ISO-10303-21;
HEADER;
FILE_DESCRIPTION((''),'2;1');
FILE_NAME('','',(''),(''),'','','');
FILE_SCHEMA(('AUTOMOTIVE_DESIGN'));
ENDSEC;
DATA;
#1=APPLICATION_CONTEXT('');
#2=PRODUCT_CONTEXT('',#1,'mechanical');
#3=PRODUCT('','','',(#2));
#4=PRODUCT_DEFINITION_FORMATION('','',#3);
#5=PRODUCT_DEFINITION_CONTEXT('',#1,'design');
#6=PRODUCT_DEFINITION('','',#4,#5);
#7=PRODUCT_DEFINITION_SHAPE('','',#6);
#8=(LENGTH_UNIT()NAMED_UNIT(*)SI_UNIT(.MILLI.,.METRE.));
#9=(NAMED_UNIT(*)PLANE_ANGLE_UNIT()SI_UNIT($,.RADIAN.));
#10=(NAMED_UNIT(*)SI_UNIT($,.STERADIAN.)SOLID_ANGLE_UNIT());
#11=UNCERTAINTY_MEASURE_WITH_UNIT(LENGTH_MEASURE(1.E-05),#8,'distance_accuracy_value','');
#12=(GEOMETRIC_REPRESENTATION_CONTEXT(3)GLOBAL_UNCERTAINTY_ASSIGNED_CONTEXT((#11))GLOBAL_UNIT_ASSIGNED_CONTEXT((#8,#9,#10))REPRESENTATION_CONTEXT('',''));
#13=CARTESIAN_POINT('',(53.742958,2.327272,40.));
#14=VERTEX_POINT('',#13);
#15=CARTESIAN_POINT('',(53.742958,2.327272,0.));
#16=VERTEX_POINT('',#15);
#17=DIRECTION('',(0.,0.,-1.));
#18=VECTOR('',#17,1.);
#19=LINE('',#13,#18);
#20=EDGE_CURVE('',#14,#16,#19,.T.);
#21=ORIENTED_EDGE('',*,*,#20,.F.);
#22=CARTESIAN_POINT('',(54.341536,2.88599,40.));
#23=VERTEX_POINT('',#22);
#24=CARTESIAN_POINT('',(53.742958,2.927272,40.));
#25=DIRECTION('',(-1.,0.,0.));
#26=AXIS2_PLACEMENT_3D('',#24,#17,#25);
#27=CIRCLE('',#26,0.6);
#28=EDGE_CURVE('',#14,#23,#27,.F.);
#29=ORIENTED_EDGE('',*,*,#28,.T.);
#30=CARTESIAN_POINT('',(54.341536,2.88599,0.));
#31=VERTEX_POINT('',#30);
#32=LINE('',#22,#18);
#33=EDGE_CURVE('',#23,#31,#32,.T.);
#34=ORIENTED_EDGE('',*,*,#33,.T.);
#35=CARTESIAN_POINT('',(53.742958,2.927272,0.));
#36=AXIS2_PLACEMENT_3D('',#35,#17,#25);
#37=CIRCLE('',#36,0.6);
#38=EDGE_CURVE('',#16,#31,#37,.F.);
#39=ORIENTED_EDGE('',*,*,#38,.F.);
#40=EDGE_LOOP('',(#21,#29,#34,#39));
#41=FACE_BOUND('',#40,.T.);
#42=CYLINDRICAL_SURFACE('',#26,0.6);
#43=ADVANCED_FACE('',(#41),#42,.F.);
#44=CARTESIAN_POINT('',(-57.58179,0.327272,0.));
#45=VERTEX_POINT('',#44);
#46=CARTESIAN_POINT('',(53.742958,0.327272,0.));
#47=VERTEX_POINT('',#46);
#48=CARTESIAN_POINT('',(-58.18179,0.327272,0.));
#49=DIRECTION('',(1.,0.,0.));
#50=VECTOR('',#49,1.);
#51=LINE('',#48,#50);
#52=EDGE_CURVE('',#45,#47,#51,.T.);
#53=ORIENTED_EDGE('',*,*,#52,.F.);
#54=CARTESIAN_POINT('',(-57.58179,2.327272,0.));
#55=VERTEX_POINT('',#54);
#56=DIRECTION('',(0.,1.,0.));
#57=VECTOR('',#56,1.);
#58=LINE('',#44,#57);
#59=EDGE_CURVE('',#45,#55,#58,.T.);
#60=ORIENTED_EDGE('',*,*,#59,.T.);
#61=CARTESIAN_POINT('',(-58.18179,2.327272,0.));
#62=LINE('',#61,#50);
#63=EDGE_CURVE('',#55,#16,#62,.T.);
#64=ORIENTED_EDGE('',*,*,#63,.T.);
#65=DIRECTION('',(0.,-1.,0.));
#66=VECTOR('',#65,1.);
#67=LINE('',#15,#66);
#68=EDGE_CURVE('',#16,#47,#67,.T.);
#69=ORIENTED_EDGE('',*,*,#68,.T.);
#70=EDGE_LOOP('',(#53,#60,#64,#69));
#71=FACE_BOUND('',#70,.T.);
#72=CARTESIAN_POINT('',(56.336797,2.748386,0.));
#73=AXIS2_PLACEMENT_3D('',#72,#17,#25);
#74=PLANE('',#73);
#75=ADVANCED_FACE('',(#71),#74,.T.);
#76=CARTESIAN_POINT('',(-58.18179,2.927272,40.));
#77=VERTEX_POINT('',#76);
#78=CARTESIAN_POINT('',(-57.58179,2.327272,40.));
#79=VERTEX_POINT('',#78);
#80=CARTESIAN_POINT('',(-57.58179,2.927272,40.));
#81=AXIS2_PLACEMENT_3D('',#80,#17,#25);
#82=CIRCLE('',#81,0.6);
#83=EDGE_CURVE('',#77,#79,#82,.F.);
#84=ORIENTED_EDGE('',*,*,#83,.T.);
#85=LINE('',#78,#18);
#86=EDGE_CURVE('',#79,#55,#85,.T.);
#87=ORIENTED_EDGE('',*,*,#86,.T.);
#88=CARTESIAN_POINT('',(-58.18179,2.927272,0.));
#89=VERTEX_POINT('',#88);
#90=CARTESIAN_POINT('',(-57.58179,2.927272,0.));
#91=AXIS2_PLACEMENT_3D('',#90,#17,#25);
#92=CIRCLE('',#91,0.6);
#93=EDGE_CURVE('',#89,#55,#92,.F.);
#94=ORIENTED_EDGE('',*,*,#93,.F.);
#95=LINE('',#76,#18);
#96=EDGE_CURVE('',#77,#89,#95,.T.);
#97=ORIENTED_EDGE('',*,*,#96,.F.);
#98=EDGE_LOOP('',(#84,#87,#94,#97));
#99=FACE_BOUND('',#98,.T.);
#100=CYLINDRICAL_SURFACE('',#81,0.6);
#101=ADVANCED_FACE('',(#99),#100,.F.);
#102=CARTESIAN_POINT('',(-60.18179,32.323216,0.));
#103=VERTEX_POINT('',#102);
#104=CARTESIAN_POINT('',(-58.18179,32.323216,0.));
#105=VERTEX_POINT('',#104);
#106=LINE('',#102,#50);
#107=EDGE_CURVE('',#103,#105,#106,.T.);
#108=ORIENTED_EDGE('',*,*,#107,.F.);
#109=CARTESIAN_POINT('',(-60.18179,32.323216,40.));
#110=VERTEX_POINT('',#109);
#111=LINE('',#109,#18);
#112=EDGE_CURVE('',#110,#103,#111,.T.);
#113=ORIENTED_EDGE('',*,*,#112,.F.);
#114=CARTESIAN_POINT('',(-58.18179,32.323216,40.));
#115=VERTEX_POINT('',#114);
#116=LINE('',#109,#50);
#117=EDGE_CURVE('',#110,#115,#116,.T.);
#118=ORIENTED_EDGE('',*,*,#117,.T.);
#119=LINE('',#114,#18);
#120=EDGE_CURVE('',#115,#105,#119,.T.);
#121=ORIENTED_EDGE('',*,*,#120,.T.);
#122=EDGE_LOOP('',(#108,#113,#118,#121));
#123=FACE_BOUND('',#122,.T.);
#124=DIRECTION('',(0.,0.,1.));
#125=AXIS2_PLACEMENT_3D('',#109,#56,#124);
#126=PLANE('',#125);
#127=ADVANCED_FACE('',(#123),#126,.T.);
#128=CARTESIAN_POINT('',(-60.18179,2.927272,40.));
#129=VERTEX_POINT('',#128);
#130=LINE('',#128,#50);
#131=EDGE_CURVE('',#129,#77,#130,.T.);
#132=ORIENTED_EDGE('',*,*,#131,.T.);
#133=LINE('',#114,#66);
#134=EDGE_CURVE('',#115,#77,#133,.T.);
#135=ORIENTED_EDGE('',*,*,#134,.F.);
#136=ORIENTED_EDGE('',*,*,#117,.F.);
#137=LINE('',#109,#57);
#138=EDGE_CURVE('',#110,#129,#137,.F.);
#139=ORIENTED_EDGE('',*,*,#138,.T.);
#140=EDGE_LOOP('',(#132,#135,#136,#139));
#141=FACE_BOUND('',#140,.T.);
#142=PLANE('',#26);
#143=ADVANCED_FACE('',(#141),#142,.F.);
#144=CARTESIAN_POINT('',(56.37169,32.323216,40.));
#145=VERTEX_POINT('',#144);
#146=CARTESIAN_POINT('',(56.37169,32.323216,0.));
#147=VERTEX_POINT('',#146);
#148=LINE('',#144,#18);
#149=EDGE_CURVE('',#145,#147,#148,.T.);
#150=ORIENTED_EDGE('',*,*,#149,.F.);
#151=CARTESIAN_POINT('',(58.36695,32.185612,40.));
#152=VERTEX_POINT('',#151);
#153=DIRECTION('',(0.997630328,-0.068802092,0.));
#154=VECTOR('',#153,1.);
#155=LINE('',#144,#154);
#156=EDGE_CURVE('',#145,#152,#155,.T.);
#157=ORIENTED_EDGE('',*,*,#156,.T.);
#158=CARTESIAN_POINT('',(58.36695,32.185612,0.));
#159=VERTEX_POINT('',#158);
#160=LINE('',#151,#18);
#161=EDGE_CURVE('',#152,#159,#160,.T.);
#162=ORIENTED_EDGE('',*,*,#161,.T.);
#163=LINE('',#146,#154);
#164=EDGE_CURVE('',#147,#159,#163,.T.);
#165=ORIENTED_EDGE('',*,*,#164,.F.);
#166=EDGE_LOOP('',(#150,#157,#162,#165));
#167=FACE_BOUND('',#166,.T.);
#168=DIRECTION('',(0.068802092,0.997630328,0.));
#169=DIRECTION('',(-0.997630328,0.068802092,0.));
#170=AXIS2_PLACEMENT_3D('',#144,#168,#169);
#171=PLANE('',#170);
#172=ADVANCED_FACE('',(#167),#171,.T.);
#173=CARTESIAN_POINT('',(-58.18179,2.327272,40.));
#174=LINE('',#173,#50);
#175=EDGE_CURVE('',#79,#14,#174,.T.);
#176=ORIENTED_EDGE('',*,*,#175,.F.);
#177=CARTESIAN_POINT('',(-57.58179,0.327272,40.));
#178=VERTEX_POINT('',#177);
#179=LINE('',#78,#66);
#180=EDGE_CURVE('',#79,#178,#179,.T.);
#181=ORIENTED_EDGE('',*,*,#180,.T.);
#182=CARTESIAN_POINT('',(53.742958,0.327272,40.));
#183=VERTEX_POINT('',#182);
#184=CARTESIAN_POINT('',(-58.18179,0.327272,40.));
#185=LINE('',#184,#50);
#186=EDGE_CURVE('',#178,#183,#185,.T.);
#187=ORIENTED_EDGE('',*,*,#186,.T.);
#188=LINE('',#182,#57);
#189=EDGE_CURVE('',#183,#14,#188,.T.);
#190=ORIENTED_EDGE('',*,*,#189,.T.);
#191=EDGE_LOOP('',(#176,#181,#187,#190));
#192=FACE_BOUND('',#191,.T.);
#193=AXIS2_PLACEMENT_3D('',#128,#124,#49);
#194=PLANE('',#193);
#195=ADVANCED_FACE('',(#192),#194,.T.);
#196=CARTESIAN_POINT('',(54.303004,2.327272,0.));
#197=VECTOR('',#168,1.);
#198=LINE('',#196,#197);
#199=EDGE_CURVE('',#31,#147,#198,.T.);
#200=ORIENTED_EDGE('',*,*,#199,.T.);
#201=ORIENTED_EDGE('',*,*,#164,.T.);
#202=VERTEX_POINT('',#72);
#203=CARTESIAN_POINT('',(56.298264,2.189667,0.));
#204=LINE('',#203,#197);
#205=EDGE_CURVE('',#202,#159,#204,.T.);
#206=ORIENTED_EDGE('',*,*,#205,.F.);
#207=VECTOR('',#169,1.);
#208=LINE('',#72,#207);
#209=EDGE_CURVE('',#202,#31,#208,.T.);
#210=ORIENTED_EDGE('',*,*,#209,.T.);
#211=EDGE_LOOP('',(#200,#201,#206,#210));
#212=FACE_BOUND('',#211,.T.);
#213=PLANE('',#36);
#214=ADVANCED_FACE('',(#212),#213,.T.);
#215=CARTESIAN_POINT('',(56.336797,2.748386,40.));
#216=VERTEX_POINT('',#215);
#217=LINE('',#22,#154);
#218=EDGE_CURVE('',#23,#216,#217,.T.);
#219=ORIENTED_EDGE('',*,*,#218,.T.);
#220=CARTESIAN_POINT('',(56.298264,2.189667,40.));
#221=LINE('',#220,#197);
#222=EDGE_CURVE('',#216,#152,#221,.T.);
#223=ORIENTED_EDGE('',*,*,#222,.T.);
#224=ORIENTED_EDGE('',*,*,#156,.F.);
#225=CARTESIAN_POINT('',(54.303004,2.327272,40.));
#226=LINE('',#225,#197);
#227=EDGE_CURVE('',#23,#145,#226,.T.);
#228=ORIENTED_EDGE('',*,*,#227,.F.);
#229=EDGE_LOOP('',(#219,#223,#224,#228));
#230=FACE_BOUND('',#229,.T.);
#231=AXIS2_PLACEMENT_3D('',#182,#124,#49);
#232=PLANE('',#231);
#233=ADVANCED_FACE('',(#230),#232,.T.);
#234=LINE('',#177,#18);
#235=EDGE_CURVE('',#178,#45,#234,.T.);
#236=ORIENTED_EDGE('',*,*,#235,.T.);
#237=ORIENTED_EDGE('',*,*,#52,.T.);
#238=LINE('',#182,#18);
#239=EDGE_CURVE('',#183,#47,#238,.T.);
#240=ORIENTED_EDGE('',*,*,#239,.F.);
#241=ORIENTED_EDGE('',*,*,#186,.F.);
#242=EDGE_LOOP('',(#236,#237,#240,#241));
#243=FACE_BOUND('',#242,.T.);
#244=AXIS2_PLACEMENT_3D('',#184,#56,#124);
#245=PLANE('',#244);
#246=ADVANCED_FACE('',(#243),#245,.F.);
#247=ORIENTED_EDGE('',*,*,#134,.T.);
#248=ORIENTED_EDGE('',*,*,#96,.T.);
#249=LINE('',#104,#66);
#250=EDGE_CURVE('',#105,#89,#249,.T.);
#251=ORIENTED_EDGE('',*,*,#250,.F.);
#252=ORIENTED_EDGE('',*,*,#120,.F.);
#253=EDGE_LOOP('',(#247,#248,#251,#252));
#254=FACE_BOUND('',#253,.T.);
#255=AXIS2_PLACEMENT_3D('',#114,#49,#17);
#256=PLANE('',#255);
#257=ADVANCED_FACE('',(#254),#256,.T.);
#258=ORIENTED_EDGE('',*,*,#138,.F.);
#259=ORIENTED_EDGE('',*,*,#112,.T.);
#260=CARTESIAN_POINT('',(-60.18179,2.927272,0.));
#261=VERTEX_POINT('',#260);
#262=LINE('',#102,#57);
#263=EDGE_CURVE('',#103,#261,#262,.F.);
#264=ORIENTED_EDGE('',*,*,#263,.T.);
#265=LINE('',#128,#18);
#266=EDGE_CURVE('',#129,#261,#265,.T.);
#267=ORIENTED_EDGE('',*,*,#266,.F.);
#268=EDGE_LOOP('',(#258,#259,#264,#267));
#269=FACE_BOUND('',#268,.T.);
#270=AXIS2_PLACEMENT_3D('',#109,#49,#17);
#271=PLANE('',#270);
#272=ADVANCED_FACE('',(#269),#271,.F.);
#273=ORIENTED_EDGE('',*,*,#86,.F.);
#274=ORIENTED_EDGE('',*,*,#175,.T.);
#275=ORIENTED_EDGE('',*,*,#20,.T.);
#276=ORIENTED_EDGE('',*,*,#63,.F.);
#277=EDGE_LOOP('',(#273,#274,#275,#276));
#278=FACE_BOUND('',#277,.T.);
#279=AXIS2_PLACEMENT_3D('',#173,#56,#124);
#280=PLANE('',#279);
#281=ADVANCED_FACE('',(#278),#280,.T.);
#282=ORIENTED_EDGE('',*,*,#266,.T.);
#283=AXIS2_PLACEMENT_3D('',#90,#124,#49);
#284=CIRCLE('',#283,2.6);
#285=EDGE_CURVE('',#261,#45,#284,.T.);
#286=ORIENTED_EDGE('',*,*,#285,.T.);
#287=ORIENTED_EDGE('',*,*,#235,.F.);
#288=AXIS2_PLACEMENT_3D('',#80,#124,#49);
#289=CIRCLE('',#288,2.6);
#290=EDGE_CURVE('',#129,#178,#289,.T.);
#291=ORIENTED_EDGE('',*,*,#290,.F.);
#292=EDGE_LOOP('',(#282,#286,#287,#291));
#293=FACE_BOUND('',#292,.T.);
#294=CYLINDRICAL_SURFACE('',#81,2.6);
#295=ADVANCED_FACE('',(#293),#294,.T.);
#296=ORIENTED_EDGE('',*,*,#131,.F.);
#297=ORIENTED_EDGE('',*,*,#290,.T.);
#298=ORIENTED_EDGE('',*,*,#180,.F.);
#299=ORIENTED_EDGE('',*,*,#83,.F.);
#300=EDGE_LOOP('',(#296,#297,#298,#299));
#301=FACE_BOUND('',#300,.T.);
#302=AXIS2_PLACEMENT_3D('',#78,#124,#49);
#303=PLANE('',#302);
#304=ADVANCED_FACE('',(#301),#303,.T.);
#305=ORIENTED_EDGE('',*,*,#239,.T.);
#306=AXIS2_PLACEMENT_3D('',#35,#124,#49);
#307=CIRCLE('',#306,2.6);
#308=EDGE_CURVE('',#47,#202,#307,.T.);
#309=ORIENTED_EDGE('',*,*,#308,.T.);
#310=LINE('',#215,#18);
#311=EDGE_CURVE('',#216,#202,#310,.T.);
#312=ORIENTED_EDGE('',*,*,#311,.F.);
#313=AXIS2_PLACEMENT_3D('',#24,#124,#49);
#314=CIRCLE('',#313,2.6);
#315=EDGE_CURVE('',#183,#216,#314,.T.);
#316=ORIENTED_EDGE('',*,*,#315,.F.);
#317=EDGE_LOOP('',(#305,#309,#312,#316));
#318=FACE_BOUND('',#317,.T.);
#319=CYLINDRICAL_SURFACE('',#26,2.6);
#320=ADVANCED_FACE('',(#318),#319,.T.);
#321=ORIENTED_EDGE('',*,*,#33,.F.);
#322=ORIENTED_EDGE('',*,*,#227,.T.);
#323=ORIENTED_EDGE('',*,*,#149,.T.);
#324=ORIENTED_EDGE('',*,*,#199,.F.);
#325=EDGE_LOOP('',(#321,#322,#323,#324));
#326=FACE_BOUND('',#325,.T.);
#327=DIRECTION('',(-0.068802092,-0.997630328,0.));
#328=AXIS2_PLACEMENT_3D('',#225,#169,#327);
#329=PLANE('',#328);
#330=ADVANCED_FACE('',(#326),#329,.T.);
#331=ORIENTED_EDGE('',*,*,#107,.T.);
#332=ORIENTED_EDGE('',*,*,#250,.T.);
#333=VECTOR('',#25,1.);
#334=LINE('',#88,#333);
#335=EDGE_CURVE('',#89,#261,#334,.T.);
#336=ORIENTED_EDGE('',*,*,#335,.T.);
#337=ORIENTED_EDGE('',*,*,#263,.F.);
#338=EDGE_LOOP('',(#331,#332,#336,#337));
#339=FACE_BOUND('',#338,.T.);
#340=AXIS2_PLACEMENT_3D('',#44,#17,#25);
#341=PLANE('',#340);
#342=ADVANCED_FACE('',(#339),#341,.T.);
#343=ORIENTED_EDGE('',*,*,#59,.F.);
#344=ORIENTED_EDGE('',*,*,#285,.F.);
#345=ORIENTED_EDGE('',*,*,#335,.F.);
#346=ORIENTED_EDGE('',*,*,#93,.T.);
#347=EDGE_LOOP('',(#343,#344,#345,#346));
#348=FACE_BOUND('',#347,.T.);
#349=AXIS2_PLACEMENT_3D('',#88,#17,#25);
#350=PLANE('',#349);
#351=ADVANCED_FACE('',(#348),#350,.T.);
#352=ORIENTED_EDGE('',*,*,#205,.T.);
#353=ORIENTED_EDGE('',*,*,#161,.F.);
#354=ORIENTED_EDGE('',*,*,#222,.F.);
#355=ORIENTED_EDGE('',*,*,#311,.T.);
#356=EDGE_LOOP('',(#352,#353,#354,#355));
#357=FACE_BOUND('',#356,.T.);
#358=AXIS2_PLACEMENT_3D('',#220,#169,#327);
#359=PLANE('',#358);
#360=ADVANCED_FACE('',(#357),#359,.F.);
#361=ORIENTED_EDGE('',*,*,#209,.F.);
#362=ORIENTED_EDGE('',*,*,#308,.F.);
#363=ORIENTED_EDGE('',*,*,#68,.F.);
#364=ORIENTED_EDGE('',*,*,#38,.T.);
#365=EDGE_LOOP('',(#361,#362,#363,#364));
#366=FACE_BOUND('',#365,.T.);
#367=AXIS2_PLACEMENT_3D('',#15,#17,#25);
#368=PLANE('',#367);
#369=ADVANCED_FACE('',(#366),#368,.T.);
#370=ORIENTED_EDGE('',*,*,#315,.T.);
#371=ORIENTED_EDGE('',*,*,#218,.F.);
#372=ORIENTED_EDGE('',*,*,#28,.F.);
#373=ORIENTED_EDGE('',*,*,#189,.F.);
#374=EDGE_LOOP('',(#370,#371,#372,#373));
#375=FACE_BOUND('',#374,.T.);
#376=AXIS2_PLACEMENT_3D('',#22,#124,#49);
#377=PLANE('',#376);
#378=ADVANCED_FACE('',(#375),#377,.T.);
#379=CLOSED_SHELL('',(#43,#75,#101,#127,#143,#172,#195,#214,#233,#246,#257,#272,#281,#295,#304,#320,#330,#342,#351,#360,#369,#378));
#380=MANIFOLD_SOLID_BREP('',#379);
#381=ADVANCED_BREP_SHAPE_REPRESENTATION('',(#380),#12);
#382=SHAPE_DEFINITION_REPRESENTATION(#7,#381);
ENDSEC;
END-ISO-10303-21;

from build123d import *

# Parameters (mm, degrees)
BASE_FLANGE1_DEPTH = 40


# Sheet-metal steps are written as plain solids
with BuildPart() as part:
    # Sketch1 → Base-Flange1 (new body)
    with BuildSketch(Plane.XY):
        with BuildLine():
            Line((-58.181789665, 32.32321648), (-58.181789665, 2.927271587))
            ThreePointArc((-58.181789665, 2.927271587), (-58.006053734, 2.503007518), (-57.581789665, 2.327271587))
            Line((-57.581789665, 2.327271587), (53.742957817, 2.327271587))
            ThreePointArc((53.742957817, 2.327271587), (54.152366688, 2.488655152), (54.341536014, 2.885990332))
            Line((54.341536014, 2.885990332), (56.371689542, 32.32321648))
            Line((56.371689542, 32.32321648), (58.366950199, 32.185612297))
            Line((58.366950199, 32.185612297), (56.336796671, 2.748386148))
            ThreePointArc((56.336796671, 2.748386148), (55.517062924, 1.026600371), (53.742957817, 0.327271587))
            Line((53.742957817, 0.327271587), (-57.581789665, 0.327271587))
            ThreePointArc((-57.581789665, 0.327271587), (-59.420267296, 1.088793956), (-60.181789665, 2.927271587))
            Line((-60.181789665, 2.927271587), (-60.181789665, 32.32321648))
            Line((-60.181789665, 32.32321648), (-58.181789665, 32.32321648))
        make_face()
    extrude(amount=BASE_FLANGE1_DEPTH)


solid = part.part
